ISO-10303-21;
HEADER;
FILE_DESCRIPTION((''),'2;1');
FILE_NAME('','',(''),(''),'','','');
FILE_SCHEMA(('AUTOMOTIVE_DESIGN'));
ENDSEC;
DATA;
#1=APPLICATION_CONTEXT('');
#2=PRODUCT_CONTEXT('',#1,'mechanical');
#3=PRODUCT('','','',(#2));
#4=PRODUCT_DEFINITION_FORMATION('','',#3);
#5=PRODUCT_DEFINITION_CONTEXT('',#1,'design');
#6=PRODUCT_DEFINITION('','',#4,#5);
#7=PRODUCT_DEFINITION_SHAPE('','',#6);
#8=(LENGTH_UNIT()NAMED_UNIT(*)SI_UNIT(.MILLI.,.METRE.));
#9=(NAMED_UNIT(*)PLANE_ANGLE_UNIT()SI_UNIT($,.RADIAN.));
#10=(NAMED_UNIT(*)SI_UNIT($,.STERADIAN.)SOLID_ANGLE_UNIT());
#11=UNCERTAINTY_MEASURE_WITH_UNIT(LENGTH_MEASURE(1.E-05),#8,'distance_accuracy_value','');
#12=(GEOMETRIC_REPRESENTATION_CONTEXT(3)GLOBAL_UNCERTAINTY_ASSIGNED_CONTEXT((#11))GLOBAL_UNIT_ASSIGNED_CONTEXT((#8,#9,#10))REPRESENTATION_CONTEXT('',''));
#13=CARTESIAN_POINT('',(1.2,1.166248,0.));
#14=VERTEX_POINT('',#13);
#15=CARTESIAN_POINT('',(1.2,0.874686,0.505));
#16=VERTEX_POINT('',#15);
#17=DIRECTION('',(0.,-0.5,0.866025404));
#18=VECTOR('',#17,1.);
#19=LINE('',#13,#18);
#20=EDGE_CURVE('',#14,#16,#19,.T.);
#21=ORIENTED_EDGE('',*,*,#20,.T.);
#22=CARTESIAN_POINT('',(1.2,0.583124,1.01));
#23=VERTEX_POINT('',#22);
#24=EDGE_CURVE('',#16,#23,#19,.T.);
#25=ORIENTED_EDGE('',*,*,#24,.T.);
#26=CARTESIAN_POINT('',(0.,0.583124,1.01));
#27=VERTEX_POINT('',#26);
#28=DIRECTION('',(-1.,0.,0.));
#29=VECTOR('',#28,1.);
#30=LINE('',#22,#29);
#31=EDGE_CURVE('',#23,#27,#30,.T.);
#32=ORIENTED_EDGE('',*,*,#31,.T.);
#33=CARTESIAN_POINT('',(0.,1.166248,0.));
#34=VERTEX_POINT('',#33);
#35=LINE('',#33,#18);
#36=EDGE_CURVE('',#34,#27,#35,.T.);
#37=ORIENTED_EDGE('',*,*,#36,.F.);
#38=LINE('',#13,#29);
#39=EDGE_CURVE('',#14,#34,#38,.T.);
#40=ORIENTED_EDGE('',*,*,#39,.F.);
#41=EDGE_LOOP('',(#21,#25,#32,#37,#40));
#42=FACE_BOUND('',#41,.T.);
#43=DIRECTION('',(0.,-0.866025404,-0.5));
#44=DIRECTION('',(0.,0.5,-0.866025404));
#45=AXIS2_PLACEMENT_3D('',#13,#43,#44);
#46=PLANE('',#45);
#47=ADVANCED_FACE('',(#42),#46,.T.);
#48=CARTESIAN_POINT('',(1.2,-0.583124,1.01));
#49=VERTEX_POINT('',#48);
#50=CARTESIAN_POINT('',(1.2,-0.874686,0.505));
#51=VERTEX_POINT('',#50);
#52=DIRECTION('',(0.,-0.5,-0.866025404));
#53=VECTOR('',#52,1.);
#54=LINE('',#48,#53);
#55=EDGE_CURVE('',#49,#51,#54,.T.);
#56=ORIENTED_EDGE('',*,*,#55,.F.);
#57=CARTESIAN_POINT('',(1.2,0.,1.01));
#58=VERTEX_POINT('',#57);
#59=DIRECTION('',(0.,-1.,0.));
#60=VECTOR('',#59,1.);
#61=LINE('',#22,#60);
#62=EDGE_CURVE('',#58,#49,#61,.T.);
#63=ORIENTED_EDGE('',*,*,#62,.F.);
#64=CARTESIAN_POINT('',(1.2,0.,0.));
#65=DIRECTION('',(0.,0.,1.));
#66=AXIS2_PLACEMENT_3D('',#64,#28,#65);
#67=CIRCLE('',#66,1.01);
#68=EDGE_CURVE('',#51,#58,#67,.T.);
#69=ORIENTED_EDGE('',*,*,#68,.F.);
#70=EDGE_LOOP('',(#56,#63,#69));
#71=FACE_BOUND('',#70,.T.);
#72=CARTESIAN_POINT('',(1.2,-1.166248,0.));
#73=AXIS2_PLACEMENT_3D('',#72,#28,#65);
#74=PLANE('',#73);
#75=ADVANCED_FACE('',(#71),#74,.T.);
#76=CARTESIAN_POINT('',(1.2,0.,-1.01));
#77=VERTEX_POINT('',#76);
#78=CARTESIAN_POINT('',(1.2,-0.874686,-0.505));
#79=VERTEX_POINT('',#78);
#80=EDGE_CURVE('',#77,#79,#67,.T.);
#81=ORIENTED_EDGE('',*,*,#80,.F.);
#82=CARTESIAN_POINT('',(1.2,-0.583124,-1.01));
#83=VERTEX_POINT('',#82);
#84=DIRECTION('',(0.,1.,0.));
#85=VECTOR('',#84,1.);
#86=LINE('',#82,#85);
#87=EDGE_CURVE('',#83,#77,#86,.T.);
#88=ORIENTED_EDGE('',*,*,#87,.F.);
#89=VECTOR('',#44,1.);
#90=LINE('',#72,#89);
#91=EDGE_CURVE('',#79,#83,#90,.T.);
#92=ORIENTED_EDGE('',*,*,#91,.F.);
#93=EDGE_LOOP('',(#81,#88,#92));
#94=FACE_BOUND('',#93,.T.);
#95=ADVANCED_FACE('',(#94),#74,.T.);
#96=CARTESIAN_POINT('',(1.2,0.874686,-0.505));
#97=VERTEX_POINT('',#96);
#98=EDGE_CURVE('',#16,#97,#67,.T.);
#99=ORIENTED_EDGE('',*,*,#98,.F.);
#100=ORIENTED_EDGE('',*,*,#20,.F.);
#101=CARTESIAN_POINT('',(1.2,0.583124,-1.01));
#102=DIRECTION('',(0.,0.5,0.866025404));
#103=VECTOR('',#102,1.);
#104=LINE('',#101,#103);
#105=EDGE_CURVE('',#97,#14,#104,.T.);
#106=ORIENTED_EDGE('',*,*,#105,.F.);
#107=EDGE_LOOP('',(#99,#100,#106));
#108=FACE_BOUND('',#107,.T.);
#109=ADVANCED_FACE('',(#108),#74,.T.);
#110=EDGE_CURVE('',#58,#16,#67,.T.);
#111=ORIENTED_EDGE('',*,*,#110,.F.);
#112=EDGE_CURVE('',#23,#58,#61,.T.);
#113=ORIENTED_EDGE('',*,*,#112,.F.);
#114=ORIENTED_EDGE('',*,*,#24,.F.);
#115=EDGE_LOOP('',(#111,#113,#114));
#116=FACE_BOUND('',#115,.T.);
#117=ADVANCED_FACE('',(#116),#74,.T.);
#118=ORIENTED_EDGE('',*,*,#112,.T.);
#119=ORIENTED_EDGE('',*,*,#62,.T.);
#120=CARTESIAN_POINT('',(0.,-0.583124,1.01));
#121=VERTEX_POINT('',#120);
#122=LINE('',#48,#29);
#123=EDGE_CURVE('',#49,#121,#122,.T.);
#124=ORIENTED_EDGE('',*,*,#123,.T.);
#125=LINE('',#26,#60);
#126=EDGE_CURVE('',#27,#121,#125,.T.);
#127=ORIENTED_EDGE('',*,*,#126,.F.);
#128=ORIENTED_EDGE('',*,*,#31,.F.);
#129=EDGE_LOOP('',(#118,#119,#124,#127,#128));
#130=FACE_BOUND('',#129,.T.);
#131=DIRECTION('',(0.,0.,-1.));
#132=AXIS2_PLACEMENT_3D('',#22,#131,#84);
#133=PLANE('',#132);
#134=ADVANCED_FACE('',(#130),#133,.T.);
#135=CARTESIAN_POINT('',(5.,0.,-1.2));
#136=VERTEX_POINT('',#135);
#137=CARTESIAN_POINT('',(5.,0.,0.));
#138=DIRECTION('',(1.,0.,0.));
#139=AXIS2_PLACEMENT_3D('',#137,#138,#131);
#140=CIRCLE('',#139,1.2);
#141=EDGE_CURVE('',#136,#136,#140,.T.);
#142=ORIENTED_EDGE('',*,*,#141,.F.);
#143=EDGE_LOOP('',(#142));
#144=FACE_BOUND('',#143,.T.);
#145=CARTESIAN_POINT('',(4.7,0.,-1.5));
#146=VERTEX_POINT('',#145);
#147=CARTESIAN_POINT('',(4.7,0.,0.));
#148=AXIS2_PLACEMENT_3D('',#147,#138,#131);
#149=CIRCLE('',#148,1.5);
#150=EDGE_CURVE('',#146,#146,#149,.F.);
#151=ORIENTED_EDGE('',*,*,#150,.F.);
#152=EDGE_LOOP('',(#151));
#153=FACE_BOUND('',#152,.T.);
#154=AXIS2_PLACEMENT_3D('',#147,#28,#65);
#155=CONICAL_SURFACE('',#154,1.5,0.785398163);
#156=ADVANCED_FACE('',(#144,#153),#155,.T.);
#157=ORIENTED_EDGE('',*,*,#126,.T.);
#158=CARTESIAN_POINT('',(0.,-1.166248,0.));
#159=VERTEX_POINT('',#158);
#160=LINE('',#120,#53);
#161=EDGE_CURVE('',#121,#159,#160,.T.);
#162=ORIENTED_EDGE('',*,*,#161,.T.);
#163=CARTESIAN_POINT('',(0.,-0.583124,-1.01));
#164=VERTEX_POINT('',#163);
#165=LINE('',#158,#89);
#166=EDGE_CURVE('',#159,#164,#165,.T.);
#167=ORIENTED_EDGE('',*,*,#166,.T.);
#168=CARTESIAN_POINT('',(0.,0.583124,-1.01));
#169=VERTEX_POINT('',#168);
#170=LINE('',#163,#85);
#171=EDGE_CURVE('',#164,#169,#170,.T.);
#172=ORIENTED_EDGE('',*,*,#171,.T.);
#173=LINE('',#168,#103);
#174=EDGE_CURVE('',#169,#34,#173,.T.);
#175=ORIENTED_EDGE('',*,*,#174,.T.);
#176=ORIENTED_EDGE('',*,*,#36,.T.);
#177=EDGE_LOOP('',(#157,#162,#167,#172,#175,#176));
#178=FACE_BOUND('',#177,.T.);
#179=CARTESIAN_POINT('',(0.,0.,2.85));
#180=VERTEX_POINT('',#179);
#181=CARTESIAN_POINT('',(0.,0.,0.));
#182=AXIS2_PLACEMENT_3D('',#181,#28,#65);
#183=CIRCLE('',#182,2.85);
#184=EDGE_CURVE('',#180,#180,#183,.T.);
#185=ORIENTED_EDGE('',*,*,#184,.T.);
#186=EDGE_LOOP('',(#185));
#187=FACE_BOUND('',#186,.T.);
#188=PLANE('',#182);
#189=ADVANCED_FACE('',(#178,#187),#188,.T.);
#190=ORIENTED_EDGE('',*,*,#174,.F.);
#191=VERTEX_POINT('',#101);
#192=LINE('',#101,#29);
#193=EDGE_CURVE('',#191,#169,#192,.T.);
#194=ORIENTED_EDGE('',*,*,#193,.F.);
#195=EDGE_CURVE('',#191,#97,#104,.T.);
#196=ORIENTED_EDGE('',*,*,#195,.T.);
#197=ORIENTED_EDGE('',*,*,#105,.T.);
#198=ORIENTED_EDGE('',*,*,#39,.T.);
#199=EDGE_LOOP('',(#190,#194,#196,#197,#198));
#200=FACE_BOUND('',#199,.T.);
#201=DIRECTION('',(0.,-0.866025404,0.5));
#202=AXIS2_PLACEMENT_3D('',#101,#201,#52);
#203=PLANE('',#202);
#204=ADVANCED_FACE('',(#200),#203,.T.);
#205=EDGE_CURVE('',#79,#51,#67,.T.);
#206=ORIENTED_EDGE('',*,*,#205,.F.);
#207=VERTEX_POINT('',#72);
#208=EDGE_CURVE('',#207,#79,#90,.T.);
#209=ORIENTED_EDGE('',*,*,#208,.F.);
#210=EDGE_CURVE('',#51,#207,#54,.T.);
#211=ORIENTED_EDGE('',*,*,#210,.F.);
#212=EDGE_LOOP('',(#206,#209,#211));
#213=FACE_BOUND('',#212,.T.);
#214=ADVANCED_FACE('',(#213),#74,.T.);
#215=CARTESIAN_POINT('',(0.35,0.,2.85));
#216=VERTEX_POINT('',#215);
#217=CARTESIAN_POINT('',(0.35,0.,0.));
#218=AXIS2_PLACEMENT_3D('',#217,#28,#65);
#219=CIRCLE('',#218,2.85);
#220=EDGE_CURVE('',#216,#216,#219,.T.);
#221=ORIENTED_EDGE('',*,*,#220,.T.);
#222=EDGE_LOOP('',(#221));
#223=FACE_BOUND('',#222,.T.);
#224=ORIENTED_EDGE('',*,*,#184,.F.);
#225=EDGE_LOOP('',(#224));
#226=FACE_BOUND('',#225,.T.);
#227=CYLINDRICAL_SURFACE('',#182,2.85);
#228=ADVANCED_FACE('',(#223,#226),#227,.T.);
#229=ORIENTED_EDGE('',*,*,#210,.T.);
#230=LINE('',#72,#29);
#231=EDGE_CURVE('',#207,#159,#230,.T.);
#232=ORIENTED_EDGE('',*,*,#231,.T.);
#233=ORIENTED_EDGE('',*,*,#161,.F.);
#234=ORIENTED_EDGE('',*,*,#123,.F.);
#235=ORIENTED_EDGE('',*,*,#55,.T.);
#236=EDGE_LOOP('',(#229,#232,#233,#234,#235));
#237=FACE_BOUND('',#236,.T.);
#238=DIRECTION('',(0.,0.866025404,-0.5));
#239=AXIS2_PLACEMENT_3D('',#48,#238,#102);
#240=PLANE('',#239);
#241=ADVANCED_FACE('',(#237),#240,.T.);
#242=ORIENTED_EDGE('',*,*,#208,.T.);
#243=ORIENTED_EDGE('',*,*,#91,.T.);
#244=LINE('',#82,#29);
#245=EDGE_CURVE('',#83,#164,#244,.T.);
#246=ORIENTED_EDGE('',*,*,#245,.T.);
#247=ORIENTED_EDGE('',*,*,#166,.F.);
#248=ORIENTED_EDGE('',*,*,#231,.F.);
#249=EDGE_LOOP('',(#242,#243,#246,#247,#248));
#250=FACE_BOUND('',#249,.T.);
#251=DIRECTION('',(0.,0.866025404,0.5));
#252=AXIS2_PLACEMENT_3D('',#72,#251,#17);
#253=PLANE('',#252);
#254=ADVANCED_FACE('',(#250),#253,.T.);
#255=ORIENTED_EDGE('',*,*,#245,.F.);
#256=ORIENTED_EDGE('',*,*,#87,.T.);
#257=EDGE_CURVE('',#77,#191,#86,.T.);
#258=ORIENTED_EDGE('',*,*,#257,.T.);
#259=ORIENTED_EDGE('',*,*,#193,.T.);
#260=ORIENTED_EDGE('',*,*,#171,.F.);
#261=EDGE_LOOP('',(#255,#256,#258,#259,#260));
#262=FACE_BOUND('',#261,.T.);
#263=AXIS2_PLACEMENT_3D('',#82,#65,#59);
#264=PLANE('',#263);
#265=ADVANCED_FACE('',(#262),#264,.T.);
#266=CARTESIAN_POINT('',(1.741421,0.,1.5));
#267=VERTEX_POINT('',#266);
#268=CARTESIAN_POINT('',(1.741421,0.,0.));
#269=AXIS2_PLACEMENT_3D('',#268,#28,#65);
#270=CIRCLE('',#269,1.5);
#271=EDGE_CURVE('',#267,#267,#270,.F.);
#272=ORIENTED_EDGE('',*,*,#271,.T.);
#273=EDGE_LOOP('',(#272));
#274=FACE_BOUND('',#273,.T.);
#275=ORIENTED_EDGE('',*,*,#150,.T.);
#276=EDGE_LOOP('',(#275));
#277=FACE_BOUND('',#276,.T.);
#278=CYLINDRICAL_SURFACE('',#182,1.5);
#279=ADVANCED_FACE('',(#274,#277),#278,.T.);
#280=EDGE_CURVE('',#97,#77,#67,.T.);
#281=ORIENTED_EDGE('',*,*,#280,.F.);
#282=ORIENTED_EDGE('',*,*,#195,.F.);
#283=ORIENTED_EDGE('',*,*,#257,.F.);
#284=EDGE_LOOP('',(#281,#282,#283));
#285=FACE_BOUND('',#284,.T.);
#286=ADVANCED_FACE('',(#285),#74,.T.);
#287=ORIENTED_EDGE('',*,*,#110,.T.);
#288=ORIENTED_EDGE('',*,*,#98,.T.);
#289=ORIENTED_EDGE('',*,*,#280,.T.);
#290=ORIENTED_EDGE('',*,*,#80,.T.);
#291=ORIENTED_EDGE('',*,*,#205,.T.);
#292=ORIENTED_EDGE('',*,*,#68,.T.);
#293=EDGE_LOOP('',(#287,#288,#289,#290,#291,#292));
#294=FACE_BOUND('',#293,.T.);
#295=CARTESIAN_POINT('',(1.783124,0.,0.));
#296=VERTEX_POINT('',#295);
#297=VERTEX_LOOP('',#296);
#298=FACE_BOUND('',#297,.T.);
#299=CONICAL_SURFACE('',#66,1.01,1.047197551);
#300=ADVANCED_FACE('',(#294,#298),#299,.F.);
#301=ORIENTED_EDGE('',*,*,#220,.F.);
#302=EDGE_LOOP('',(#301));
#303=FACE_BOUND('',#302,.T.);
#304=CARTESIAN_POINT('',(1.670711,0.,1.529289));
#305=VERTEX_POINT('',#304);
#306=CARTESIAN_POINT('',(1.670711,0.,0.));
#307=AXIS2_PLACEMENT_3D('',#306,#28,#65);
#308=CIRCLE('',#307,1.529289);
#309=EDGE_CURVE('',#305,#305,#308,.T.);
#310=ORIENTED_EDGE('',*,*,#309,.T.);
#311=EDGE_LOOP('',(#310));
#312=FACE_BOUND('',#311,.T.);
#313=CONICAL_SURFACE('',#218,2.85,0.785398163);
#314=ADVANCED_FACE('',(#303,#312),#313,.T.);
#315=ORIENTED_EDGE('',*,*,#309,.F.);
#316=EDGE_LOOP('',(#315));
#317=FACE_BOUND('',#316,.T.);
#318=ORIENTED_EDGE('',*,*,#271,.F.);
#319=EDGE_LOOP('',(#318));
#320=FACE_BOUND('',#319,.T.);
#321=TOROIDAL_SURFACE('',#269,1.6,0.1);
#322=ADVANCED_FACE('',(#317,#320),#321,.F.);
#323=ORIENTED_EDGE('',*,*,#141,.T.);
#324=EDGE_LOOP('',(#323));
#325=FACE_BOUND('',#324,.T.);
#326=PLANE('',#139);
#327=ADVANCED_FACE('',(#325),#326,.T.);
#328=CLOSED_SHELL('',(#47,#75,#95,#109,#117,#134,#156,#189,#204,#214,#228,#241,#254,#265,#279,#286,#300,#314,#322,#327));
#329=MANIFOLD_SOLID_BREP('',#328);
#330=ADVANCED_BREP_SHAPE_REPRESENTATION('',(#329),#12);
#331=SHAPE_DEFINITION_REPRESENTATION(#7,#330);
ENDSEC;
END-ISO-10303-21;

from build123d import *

# Parameters (mm, degrees)
FILLET1_R          = 0.1
HEX_START          = -1.2
HEX_2_DEPTH        = 1.2
SKETCH4_R          = 5.337249995
CUT_EXTRUDE1_DEPTH = 3
CHAMFER1_SIZE      = 0.3


with BuildPart() as part:
    # BodySke → BaseBody (revolve)
    with BuildSketch(Plane.XY, mode=Mode.PRIVATE) as basebody_sk:
        Polygon((0, 0), (0, 2.85), (0.35, 2.85), (1.7, 1.5), (7.7195, 1.5), (8, 1.2195), (8, 0), align=None)
    revolve(basebody_sk.sketch.rotate(Axis((0, 0, 0), (1, 0, 0)), 90), axis=Axis((0, 0, 0), (1, 0, 0)))

    # Fillet1
    fillet1_edges = [part.edges().sort_by_distance(p)[0] for p in [
        (1.7, 0, -1.5),
    ]]
    fillet(fillet1_edges, radius=FILLET1_R)

    # Hex 2: read off the stored shape, not the designer's step
    # Hex 2 outline → Hex 2 (cut)
    with BuildSketch(Plane.ZY.offset(HEX_START)):
        Polygon((-1.01, -0.583123772), (0, -1.166247544), (1.01, -0.583123772), (1.01, 0.583123772), (0, 1.166247544), (-1.01, 0.583123772), align=None)
    extrude(amount=HEX_2_DEPTH, mode=Mode.SUBTRACT)

    # Hex 2 2 outline → Hex 2 2 (revolve, cut)
    with BuildSketch(Plane.YX):
        Polygon((1.01, 1.2), (0, 1.783123772), (0, 1.2), align=None)
    revolve(axis=Axis((0, 0, 0), (1, 0, 0)), mode=Mode.SUBTRACT)

    # Sketch4 → Cut-Extrude1 (cut)
    with BuildSketch(Plane(origin=(8, 0, 0), x_dir=(0, 0, -1), z_dir=(1, 0, 0))):
        Circle(SKETCH4_R)
    extrude(amount=-CUT_EXTRUDE1_DEPTH, mode=Mode.SUBTRACT)

    # Chamfer1
    chamfer1_edges = [part.edges().sort_by_distance(p)[0] for p in [
        (5, 0, -1.5),
    ]]
    chamfer(chamfer1_edges, length=CHAMFER1_SIZE)


solid = part.part
